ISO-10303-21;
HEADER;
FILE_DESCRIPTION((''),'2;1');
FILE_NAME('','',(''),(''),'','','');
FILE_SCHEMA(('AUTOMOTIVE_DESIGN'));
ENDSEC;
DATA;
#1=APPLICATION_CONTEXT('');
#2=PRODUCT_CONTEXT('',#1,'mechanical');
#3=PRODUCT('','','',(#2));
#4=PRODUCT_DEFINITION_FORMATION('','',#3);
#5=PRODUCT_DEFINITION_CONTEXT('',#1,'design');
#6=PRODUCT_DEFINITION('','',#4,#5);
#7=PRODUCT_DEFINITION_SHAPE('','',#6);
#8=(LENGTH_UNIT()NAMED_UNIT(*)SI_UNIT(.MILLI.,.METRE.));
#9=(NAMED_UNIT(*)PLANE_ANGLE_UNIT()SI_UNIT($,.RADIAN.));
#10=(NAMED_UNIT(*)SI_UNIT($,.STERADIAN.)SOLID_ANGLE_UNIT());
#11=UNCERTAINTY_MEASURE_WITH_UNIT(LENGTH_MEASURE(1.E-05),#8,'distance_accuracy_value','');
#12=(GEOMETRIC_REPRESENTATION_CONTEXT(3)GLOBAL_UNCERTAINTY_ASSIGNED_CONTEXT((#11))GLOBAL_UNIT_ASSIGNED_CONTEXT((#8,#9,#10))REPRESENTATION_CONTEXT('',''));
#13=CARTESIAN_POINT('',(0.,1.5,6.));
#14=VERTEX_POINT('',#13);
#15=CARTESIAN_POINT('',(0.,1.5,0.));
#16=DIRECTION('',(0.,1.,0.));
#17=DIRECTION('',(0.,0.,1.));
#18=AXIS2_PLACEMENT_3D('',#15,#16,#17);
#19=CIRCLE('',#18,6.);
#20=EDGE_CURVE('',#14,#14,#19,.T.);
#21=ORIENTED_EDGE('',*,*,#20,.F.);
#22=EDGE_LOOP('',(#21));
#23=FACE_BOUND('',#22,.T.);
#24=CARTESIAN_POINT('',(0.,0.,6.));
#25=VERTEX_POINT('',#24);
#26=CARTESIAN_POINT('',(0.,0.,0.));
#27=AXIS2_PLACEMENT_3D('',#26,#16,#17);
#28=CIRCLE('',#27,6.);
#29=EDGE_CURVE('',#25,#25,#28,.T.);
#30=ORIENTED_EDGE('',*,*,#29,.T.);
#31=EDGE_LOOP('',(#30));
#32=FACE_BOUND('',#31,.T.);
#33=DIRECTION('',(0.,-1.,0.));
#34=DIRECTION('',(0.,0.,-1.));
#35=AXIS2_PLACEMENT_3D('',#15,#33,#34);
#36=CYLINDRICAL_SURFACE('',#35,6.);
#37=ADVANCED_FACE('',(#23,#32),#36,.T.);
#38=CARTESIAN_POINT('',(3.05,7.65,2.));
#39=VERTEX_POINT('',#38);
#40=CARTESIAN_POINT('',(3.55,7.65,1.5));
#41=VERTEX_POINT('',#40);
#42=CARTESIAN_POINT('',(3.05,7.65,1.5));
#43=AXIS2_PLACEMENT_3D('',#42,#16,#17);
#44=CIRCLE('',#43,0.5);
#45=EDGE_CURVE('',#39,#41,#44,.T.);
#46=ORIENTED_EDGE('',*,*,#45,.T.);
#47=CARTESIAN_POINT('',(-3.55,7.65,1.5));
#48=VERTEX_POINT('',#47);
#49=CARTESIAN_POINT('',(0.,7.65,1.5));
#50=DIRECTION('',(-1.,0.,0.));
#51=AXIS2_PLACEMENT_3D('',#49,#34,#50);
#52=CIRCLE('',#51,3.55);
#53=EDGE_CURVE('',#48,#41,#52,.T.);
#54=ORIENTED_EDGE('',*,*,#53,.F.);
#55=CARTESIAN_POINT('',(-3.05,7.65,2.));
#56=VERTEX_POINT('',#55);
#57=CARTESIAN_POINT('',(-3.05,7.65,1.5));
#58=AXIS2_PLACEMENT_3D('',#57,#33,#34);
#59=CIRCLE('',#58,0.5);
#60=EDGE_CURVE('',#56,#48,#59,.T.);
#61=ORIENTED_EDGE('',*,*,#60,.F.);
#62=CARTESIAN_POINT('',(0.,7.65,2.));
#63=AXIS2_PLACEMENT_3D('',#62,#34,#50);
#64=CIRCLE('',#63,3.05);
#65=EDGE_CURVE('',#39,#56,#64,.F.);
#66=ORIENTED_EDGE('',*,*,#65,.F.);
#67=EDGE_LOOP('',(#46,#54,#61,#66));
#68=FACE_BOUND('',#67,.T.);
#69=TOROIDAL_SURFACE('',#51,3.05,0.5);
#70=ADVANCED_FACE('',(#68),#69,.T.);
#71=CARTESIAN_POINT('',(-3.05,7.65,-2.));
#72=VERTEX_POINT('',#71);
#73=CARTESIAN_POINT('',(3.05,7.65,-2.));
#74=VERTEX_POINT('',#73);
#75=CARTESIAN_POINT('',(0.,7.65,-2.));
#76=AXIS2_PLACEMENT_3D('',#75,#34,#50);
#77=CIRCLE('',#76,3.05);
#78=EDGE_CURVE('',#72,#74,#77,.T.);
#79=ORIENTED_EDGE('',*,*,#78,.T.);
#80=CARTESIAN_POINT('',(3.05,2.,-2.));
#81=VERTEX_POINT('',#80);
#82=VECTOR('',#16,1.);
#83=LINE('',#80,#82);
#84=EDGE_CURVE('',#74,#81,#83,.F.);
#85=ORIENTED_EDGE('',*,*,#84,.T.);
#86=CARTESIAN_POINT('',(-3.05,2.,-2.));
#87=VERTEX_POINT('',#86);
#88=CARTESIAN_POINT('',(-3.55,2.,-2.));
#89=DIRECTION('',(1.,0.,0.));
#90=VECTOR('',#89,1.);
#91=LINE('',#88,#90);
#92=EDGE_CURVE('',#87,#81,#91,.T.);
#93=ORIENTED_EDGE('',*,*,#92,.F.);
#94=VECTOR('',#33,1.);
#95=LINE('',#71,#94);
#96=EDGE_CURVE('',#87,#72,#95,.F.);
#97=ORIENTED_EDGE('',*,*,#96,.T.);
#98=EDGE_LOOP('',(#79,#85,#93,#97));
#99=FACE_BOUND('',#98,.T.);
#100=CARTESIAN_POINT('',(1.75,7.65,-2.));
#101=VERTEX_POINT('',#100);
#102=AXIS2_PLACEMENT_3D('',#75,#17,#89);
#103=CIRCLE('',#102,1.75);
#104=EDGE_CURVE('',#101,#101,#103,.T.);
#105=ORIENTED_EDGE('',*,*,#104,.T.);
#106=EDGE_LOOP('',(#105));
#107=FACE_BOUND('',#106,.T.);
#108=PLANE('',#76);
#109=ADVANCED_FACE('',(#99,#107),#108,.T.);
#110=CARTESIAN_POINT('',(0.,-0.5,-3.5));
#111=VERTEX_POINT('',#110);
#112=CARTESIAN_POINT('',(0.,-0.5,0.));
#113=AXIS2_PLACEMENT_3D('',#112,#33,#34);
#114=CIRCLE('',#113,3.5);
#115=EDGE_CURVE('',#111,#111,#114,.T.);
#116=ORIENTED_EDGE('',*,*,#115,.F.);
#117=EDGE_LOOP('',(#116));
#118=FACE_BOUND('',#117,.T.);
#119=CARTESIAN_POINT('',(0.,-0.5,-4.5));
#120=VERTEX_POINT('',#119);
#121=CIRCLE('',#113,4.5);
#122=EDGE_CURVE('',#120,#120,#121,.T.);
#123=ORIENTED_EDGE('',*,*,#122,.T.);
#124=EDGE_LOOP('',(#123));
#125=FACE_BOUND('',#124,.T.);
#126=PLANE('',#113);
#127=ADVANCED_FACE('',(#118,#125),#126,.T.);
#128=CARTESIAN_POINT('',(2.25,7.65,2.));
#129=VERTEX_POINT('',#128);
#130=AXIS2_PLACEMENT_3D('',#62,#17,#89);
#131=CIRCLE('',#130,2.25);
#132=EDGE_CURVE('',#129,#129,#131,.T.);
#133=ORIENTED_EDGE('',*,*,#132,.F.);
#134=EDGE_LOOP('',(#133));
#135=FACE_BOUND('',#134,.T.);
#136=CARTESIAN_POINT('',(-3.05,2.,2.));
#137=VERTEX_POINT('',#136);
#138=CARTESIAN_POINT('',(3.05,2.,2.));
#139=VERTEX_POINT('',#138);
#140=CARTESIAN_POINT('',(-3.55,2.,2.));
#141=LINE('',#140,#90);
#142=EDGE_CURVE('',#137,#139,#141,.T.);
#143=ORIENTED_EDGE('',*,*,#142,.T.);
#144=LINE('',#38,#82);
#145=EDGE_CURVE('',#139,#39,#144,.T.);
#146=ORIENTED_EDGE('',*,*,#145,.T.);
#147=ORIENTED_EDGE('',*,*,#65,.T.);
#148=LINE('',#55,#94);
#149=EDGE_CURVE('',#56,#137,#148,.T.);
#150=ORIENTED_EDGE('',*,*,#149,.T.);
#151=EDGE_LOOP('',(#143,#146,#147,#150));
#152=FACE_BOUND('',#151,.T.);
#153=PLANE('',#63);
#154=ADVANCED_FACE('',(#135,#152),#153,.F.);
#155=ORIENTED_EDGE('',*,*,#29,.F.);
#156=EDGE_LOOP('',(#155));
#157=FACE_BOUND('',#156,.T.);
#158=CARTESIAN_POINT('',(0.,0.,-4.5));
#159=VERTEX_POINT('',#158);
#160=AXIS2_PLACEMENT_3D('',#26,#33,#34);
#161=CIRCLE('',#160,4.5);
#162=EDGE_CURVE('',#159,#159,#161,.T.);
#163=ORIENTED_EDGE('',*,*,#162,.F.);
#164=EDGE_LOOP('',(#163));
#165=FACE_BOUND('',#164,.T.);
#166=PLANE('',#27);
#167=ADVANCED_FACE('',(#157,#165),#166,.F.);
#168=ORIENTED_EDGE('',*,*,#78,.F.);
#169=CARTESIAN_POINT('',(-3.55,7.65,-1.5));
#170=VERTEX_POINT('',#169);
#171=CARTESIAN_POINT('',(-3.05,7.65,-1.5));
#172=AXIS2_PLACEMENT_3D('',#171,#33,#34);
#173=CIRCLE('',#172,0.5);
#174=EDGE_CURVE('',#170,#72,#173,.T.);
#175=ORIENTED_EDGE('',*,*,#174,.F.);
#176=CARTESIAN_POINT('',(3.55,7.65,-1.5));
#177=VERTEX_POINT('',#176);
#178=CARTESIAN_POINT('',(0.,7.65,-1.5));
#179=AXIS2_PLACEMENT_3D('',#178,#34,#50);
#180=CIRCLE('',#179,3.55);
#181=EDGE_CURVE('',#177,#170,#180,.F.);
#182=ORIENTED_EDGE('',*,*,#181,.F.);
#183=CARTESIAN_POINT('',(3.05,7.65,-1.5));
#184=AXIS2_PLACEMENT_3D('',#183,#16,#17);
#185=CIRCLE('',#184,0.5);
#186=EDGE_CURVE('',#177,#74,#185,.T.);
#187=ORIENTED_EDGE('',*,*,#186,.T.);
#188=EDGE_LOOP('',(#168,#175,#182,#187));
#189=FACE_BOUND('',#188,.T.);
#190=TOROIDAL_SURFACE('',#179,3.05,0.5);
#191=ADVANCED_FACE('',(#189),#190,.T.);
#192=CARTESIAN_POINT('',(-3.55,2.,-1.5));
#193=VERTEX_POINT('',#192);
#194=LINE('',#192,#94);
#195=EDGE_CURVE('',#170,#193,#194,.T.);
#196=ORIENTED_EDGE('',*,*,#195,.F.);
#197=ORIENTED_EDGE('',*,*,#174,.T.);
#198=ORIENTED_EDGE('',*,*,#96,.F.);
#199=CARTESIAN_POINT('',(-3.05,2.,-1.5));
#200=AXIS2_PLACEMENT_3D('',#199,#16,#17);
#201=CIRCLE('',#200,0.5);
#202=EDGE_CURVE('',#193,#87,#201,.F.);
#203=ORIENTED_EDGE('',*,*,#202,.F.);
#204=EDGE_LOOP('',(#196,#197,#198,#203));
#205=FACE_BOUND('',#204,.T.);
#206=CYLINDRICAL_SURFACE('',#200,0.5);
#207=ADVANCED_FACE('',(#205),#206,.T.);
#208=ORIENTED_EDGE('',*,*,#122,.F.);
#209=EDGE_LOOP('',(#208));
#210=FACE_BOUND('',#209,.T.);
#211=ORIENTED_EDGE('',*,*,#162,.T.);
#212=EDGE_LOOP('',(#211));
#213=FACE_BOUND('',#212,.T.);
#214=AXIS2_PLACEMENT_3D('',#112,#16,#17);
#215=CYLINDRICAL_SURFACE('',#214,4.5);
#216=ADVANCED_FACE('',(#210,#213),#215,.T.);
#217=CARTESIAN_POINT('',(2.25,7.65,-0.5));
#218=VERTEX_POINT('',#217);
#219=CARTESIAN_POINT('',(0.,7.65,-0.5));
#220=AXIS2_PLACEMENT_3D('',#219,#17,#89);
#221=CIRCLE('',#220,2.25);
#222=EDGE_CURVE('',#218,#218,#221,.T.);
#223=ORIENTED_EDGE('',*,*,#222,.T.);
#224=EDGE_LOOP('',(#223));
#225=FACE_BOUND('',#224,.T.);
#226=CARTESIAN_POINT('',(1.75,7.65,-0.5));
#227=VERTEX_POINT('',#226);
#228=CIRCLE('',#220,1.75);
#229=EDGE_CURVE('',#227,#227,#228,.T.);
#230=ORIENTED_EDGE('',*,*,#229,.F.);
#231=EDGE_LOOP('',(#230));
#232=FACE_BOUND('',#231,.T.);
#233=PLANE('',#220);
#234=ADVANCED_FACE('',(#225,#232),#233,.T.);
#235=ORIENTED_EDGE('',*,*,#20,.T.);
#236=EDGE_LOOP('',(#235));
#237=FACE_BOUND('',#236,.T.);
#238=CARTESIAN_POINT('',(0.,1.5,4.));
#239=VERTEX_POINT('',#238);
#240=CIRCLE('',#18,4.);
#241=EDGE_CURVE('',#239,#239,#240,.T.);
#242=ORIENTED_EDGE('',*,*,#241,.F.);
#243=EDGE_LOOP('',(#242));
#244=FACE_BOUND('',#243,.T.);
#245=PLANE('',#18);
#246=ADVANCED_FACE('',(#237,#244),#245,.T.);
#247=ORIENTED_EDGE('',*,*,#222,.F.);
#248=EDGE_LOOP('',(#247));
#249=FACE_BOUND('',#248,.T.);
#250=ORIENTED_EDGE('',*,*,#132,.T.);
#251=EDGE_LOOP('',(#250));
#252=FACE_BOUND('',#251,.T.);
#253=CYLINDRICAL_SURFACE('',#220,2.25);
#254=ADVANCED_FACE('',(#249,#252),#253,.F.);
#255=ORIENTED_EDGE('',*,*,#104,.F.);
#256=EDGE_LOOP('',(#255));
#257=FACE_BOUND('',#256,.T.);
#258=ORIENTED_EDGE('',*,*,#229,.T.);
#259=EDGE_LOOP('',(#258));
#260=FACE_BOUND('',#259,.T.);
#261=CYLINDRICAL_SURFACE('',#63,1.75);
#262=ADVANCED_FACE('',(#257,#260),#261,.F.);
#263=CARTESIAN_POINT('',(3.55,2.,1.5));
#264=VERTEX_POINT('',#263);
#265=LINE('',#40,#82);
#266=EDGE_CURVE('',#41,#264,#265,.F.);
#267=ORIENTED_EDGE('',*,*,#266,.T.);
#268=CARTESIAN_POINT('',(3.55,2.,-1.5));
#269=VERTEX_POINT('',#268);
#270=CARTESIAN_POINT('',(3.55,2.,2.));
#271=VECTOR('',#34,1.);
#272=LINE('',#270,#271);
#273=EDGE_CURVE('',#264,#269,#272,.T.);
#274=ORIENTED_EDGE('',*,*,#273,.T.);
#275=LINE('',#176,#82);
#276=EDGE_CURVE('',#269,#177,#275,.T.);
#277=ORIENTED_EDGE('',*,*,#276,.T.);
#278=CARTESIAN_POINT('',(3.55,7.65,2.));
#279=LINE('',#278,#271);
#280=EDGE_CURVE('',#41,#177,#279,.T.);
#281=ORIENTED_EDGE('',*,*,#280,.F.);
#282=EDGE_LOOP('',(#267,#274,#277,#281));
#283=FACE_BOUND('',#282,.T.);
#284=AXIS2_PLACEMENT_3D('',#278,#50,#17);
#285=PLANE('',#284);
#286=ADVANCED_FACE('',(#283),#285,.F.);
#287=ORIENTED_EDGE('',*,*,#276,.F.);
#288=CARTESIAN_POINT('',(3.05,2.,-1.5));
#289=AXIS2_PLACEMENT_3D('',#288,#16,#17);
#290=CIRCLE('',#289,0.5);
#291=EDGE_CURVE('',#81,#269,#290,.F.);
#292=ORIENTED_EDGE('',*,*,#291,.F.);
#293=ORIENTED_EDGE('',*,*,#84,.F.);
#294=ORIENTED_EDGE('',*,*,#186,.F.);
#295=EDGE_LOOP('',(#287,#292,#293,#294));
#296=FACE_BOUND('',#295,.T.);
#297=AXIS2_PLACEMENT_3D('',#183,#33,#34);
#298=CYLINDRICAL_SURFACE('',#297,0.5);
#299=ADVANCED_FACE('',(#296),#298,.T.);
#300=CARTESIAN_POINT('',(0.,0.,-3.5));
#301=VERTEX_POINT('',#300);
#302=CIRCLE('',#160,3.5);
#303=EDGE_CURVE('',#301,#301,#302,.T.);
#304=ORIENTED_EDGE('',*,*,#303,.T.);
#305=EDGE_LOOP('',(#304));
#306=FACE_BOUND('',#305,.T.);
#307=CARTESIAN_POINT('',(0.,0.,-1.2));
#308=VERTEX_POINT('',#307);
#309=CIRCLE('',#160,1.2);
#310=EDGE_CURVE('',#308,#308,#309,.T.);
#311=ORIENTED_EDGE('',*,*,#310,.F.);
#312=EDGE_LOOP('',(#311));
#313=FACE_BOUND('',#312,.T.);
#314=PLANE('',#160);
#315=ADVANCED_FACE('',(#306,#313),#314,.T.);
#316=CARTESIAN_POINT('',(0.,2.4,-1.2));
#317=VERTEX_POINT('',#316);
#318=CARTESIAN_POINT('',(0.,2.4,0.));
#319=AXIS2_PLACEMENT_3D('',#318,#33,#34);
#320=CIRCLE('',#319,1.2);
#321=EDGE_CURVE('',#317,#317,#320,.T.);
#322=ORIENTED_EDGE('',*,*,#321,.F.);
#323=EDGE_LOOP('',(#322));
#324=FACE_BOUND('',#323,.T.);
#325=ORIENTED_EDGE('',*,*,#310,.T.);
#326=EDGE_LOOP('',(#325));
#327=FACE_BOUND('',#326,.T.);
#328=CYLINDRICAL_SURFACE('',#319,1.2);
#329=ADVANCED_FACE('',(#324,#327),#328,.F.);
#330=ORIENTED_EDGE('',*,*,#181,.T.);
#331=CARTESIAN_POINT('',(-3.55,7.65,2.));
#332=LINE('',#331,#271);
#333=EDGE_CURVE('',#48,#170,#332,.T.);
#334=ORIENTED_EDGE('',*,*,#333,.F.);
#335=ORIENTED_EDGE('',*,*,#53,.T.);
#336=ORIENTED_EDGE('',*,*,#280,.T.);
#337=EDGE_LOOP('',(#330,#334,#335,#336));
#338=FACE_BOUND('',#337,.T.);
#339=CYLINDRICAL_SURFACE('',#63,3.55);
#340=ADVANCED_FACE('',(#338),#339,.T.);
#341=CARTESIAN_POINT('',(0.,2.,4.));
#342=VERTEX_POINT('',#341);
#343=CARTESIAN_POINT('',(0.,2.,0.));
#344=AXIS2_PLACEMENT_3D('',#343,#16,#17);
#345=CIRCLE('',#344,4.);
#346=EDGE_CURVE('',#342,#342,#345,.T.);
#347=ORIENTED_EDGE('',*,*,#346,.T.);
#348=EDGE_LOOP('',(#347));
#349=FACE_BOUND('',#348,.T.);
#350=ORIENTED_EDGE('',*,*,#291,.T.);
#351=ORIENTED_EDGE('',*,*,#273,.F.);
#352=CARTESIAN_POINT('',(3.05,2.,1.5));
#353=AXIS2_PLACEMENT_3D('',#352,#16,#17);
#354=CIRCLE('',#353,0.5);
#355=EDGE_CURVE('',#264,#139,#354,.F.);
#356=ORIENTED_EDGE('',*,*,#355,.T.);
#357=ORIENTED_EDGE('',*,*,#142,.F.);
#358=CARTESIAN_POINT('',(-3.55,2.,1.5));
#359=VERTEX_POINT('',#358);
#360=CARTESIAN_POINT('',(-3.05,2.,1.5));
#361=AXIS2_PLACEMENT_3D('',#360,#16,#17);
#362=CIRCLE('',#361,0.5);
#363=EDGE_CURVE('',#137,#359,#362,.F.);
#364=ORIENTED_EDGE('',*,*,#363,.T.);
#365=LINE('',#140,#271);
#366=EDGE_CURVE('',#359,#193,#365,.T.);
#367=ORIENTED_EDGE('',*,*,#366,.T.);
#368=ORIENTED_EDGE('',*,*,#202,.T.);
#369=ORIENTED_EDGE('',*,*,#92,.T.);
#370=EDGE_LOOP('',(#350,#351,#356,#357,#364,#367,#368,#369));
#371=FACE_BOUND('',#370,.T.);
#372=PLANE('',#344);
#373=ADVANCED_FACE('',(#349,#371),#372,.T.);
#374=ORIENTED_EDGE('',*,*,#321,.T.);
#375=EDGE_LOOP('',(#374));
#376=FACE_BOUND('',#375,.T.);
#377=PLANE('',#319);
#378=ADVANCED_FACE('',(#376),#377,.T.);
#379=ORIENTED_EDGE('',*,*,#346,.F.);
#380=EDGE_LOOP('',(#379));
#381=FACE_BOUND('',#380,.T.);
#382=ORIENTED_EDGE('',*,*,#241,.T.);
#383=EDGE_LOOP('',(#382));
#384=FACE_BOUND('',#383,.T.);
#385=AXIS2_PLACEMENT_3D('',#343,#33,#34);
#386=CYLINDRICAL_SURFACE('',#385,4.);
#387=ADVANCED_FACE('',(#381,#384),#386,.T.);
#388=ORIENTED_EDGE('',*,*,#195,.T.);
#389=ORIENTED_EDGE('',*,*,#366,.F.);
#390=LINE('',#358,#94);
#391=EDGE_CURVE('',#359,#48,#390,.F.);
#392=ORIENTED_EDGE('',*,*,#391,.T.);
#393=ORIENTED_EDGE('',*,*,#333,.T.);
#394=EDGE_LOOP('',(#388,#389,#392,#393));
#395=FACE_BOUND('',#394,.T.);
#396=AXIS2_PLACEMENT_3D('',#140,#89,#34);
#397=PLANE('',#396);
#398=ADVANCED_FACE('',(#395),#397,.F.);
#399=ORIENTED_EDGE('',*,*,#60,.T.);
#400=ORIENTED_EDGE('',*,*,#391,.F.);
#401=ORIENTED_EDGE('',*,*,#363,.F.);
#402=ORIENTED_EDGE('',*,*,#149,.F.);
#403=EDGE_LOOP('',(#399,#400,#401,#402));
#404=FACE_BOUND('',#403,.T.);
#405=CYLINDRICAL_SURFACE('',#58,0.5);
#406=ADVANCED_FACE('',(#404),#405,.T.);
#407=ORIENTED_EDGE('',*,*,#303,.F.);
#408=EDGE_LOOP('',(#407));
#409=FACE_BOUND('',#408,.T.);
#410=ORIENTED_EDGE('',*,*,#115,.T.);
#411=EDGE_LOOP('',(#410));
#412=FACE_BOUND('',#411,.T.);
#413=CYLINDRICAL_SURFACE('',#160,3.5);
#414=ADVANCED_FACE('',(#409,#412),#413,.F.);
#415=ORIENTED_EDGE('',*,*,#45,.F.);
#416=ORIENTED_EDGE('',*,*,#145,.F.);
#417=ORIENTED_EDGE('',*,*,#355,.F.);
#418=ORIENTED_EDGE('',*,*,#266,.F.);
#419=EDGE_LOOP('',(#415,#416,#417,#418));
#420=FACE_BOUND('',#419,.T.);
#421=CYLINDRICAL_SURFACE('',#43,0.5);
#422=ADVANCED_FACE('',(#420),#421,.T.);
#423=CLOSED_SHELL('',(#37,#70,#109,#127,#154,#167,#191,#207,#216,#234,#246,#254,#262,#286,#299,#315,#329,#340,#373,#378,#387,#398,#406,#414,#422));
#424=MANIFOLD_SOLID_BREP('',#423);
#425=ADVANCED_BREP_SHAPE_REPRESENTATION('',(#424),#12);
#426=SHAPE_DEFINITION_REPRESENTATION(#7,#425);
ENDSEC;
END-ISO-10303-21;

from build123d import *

# Parameters (mm, degrees)
SKETCH_1_R          = 6
EXTRUDE_1_DEPTH     = 1.5
SKETCH_2_R          = 4
EXTRUDE_2_DEPTH     = 0.5
SKETCH_3_R          = 4.5
EXTRUDE_3_DEPTH     = 0.5
SKETCH_4_R          = 3.5
CUT_EXTRUDE_1_DEPTH = 0.5
SKETCH_8_R          = 1.75
EXTRUDE_5_DEPTH     = 2
SKETCH_9_R          = 2.25
CUT_EXTRUDE_3_DEPTH = 2.5
FILLET_1_R          = 0.5
SKETCH_5_R          = 1.2
CUT_EXTRUDE_2_DEPTH = 2.4


with BuildPart() as part:
    # ｽｹｯﾁ1 → ﾎﾞｽ - 押し出し1 (new body)
    with BuildSketch(Plane(origin=(0, 0, 0), x_dir=(1, 0, 0), z_dir=(0, 1, 0))):
        with Locations(Location((0, 0, 0), (0, 0, 270))):
            Circle(SKETCH_1_R)
    extrude(amount=EXTRUDE_1_DEPTH)

    # ｽｹｯﾁ2 → ﾎﾞｽ - 押し出し2 (add)
    with BuildSketch(Plane(origin=(0, 1.5, 0), x_dir=(1, 0, 0), z_dir=(0, 1, 0))):
        with Locations(Location((0, 0, 0), (0, 0, 270))):
            Circle(SKETCH_2_R)
    extrude(amount=EXTRUDE_2_DEPTH)

    # ｽｹｯﾁ3 → ﾎﾞｽ - 押し出し3 (add)
    with BuildSketch(Plane.XZ):
        with Locations(Location((0, 0, 0), (0, 0, 270))):
            Circle(SKETCH_3_R)
    extrude(amount=EXTRUDE_3_DEPTH)

    # ｽｹｯﾁ4 → ｶｯﾄ - 押し出し1 (cut)
    with BuildSketch(Plane.XZ.offset(0.5)):
        with Locations(Location((0, 0, 0), (0, 0, 270))):
            Circle(SKETCH_4_R)
    extrude(amount=-CUT_EXTRUDE_1_DEPTH, mode=Mode.SUBTRACT)

    # ｽｹｯﾁ8 → ﾎﾞｽ - 押し出し5 (add, symmetric)
    with BuildSketch(Plane.XY):
        with BuildLine():
            Line((-3.55, 2), (-3.55, 7.65))
            ThreePointArc((-3.55, 7.65), (0, 11.2), (3.55, 7.65))
            Line((3.55, 7.65), (3.55, 2))
            Line((3.55, 2), (-3.55, 2))
        make_face()
        with Locations((0, 7.65)):
            Circle(SKETCH_8_R, mode=Mode.SUBTRACT)
    extrude(amount=EXTRUDE_5_DEPTH, both=True)

    # ｽｹｯﾁ9 → ｶｯﾄ - 押し出し3 (cut)
    with BuildSketch(Plane.XY.offset(2)):
        with Locations((0, 7.65)):
            Circle(SKETCH_9_R)
    extrude(amount=-CUT_EXTRUDE_3_DEPTH, mode=Mode.SUBTRACT)

    # ﾌｨﾚｯﾄ1
    # the kernel refuses this fillet: 0.5 mm, written as the material it takes off along each edge
    with BuildSketch(Plane(origin=(3.55, 7.65, 2), x_dir=(-1, 0, 0), z_dir=(0, -1, 0)), Plane(origin=(-3.55, 2, 2), x_dir=(1, 0, 0), z_dir=(0, 1, 0)), Plane(origin=(-3.55, 2, -2), x_dir=(0, 0, 1), z_dir=(0, 1, 0))) as fillet_1_piece_1:
        with BuildLine():
            CenterArc((FILLET_1_R, FILLET_1_R), FILLET_1_R, 180, 90)
            Line((0, FILLET_1_R), (0, 0))
            Line((0, 0), (FILLET_1_R, 0))
        make_face()
    extrude(amount=5.65, mode=Mode.SUBTRACT)
    with BuildSketch(Plane(origin=(0, 7.65, 2), x_dir=(-1, 0, 0), z_dir=(0, -1, 0))) as fillet_1_piece_2:
        with BuildLine():
            CenterArc((3.55 - FILLET_1_R, FILLET_1_R), FILLET_1_R, 270, 90)
            Line((3.55, FILLET_1_R), (3.55, 0))
            Line((3.55, 0), (3.55 - FILLET_1_R, 0))
        make_face()
    revolve(axis=Axis((0, 7.65, 2), (0, 0, -1)), revolution_arc=180, mode=Mode.SUBTRACT)
    with BuildSketch(Plane(origin=(3.55, 7.65, -2), x_dir=(-1, 0, 0), z_dir=(0, -1, 0))) as fillet_1_piece_3:
        with BuildLine():
            CenterArc((FILLET_1_R, -FILLET_1_R), FILLET_1_R, 90, 90)
            Line((0, -FILLET_1_R), (0, 0))
            Line((0, 0), (FILLET_1_R, 0))
        make_face()
    extrude(amount=5.65, mode=Mode.SUBTRACT)
    with BuildSketch(Plane(origin=(0, 7.65, -2), x_dir=(-1, 0, 0), z_dir=(0, -1, 0))) as fillet_1_piece_4:
        with BuildLine():
            CenterArc((3.55 - FILLET_1_R, -FILLET_1_R), FILLET_1_R, 0, 90)
            Line((3.55, -FILLET_1_R), (3.55, 0))
            Line((3.55, 0), (3.55 - FILLET_1_R, 0))
        make_face()
    revolve(axis=Axis((0, 7.65, -2), (0, 0, -1)), revolution_arc=180, mode=Mode.SUBTRACT)

    # ｽｹｯﾁ5 → ｶｯﾄ - 押し出し2 (cut)
    with BuildSketch(Plane.XZ):
        with Locations(Location((0, 0, 0), (0, 0, 270))):
            Circle(SKETCH_5_R)
    extrude(amount=-CUT_EXTRUDE_2_DEPTH, mode=Mode.SUBTRACT)


solid = part.part
